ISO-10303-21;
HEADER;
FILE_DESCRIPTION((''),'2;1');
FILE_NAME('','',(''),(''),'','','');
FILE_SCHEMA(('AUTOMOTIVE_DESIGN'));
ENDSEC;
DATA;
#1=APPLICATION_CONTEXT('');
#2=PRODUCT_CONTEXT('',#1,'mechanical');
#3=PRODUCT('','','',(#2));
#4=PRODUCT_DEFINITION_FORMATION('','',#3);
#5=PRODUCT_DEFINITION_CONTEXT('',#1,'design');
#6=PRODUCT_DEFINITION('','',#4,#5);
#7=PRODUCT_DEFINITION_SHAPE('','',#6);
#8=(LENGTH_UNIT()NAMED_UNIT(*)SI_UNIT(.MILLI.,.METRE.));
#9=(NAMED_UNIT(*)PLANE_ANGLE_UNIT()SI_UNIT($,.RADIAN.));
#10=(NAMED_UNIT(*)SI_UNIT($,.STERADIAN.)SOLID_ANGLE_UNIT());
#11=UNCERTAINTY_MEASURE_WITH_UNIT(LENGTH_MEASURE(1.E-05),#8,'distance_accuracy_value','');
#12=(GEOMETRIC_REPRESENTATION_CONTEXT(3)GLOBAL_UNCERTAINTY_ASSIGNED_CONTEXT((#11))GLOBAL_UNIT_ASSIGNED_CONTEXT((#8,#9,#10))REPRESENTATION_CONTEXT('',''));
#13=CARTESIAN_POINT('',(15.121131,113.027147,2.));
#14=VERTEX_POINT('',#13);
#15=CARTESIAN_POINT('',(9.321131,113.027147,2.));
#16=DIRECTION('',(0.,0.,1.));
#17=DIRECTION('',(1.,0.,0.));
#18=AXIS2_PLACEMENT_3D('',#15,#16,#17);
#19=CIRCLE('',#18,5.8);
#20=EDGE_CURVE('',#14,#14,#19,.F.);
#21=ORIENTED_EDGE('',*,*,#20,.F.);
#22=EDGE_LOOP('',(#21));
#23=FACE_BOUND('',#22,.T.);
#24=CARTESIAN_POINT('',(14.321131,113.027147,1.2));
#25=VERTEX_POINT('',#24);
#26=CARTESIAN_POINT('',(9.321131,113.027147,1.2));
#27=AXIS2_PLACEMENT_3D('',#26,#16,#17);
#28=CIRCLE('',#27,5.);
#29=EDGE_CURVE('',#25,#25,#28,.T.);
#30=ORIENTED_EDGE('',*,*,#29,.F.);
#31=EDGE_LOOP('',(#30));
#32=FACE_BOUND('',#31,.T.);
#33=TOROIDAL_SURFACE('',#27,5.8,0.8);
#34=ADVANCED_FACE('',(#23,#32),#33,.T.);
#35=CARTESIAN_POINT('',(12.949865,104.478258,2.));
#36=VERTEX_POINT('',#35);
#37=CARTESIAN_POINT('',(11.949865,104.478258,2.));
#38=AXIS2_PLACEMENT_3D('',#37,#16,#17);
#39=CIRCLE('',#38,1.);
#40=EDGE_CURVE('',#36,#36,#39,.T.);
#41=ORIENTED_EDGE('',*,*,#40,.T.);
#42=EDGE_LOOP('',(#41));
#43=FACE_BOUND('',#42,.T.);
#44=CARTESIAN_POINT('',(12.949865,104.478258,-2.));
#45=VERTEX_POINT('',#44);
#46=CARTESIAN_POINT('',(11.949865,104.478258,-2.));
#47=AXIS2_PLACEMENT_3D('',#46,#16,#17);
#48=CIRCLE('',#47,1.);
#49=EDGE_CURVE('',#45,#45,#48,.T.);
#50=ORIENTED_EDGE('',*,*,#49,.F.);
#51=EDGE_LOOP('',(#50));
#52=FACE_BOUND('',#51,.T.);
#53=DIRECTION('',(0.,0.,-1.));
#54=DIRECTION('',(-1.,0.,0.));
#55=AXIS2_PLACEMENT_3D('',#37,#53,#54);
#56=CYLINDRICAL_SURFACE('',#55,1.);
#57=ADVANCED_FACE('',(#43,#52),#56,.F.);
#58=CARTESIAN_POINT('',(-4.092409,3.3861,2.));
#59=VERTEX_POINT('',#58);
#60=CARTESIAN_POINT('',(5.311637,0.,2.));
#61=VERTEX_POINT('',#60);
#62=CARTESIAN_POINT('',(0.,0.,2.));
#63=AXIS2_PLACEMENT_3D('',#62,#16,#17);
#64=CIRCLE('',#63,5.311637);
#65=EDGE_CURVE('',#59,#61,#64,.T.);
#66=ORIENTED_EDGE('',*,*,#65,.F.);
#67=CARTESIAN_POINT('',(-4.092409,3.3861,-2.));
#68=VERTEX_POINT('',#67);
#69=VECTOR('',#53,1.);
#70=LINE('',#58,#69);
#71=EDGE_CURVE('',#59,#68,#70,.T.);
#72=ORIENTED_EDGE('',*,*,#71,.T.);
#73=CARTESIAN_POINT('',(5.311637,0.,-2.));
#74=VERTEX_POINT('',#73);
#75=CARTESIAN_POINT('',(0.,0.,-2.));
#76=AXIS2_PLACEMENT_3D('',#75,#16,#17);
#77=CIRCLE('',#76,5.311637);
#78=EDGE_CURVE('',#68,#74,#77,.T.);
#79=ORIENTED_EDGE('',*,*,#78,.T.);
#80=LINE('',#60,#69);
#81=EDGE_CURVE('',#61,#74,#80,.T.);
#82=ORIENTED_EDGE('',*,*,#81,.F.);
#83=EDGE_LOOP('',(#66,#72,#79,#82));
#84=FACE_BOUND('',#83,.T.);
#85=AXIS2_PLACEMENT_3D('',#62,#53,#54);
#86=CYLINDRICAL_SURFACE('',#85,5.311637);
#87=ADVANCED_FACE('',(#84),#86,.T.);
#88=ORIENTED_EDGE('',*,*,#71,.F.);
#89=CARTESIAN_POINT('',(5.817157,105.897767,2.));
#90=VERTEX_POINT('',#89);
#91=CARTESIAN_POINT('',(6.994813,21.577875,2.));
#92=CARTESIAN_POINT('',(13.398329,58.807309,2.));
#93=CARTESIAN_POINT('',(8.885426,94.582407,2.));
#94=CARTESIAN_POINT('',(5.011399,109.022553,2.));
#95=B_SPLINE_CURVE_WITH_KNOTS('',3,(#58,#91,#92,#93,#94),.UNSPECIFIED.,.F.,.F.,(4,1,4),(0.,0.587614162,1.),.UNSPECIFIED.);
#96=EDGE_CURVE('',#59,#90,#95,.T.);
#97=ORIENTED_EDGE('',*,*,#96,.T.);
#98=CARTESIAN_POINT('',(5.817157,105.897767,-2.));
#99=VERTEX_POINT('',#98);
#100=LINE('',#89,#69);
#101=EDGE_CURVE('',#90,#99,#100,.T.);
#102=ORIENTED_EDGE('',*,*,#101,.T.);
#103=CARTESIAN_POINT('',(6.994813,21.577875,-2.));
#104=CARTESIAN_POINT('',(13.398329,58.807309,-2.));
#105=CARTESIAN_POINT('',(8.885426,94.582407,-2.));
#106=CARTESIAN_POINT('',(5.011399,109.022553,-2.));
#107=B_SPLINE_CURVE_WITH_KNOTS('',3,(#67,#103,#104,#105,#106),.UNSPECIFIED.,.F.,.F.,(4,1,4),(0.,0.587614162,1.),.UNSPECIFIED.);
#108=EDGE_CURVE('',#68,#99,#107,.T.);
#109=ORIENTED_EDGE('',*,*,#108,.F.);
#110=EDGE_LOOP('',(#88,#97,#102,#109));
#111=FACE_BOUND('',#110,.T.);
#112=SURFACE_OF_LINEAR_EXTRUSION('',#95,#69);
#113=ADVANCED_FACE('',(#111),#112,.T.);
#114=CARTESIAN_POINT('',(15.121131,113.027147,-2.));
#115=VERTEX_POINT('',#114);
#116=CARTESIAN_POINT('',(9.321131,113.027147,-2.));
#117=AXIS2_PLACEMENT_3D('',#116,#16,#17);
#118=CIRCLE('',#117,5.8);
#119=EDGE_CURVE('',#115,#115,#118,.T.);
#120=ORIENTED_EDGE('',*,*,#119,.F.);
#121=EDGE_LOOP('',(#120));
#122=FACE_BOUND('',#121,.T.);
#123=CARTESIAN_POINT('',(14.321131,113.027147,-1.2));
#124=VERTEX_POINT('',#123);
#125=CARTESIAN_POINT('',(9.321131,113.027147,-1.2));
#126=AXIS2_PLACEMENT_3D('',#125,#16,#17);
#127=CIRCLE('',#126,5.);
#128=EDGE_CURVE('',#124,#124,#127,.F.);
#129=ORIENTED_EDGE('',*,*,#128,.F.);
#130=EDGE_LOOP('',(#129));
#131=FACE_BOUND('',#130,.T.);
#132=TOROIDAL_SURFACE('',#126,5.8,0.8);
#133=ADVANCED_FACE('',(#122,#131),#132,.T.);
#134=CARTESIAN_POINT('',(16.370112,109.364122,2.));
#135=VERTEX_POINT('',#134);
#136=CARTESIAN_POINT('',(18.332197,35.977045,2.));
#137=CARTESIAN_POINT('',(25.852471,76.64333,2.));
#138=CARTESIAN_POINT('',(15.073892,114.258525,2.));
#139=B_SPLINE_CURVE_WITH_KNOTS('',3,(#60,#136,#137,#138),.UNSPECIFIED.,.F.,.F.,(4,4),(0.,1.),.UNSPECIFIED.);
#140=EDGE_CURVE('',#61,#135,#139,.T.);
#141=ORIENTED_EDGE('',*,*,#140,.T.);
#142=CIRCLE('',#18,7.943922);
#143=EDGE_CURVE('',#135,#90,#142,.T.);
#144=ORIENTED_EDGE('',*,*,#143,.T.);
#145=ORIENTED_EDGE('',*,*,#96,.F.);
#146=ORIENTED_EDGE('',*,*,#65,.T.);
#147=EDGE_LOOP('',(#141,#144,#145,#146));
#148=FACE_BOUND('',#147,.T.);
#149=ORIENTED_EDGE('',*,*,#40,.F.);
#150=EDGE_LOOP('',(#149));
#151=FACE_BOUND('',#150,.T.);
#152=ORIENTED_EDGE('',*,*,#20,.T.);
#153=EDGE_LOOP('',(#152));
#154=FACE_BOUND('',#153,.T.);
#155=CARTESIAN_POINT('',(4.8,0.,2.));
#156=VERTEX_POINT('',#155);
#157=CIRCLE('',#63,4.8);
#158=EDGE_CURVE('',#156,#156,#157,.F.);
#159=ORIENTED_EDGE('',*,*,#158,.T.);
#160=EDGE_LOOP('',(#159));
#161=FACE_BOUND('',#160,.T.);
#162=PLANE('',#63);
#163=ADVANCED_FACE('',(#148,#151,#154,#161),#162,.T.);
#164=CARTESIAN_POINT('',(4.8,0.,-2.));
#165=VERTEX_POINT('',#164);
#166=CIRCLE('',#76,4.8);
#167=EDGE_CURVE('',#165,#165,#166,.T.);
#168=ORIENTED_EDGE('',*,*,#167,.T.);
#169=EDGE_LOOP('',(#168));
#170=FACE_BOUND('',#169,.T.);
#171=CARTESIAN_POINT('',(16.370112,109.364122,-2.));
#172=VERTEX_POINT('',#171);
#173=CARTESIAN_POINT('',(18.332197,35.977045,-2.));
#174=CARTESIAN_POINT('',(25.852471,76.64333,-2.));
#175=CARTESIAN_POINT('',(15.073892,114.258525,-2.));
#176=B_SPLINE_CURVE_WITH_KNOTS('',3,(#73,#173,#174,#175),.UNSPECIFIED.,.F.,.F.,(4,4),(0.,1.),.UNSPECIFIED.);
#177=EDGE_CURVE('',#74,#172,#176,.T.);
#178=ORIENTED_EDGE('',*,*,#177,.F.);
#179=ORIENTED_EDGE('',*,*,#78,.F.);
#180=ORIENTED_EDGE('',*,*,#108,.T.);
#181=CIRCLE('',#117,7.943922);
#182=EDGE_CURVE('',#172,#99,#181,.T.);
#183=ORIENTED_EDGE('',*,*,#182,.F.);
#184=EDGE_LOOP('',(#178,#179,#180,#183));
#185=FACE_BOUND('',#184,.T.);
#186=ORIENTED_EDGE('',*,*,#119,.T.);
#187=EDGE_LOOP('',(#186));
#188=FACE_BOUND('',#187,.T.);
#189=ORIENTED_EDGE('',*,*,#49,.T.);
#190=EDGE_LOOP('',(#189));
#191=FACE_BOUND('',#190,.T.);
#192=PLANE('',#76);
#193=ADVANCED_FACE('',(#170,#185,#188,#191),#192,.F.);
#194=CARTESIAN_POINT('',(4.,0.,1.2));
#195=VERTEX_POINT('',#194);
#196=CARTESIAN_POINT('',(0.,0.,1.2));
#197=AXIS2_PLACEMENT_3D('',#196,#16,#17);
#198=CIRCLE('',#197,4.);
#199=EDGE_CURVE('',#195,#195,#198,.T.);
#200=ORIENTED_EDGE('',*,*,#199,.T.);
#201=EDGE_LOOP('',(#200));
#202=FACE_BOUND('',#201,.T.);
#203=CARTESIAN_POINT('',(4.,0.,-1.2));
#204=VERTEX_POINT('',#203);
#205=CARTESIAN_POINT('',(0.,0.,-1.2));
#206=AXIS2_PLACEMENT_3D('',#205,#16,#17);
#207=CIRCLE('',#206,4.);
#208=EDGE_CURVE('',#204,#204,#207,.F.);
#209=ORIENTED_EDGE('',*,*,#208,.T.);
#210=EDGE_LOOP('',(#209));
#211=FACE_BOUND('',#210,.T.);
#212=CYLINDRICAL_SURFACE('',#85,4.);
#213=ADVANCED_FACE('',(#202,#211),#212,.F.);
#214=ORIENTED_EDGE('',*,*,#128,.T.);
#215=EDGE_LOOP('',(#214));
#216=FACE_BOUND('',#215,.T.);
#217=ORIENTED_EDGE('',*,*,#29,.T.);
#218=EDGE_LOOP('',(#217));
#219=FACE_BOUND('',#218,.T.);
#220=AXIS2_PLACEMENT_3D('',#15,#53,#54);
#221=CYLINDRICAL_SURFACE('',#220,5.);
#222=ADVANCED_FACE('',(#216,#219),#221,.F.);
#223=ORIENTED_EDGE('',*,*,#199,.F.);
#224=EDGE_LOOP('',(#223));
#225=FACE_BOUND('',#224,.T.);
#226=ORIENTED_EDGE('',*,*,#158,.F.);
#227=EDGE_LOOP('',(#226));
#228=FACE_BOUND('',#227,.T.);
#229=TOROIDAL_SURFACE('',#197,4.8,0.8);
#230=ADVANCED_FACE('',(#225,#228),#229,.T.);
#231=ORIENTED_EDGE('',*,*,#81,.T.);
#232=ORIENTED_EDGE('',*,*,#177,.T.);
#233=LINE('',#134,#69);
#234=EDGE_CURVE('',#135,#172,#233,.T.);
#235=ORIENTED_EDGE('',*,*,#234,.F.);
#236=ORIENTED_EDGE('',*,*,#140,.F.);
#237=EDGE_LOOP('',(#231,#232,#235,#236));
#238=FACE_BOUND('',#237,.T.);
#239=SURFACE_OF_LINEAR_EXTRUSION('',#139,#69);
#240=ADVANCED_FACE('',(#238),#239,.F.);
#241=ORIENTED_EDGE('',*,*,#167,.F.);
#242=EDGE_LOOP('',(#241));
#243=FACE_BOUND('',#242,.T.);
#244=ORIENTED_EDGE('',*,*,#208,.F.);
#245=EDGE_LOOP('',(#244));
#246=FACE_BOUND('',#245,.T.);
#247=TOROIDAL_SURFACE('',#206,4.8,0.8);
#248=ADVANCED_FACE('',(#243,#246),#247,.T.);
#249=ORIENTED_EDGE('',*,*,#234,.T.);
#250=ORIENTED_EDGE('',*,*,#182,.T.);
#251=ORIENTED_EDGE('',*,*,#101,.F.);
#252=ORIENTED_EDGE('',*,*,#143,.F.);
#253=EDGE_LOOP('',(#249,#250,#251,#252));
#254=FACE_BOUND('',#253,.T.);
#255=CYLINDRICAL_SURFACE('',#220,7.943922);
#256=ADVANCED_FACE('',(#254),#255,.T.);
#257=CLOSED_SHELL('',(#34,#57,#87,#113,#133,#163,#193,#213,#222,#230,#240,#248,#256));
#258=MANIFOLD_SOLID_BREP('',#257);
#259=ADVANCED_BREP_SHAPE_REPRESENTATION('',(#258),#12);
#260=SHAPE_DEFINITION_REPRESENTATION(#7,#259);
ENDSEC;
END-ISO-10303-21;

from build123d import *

# Parameters (mm, degrees)
SKETCH1_R           = 4
SKETCH1_R_2         = 1
SKETCH1_R_3         = 5
BOSS_EXTRUDE1_DEPTH = 2
FILLET1_R           = 0.8


with BuildPart() as part:
    # Sketch1 → Boss-Extrude1 (new, symmetric)
    with BuildSketch(Plane.XY):
        with BuildLine():
            ThreePointArc((-4.09240869, 3.386100226), (-1.799457661, -4.997542972), (5.311636624, 0))
            add(Edge.make_bspline(
                [(5.311636624, 0), (17.769363539, 34.421881869), (25.192042954, 73.13636609), (16.37011227, 109.364122199)],
                knots=[0, 0, 0, 0, 0.956773453, 0.956773453, 0.956773453, 0.956773453], degree=3))
            ThreePointArc((16.37011227, 109.364122199), (6.842083231, 120.574345754), (5.817157068, 105.897766593))
            add(Edge.make_bspline(
                [(-4.09240869, 3.386100226), (6.994812741, 21.577875377), (13.208144478, 57.701592599), (9.143863643, 92.456079954), (5.817157068, 105.897766593)],
                knots=[0, 0, 0, 0, 0.587614162, 0.97029995, 0.97029995, 0.97029995, 0.97029995], degree=3))
        make_face()
        Circle(SKETCH1_R, mode=Mode.SUBTRACT)
        with Locations((11.949864601, 104.478258332)):
            Circle(SKETCH1_R_2, mode=Mode.SUBTRACT)
        with Locations((9.321130613, 113.027146637)):
            Circle(SKETCH1_R_3, mode=Mode.SUBTRACT)
    extrude(amount=BOSS_EXTRUDE1_DEPTH, both=True)

    # Fillet1
    fillet1_edges = [part.edges().sort_by_distance(p)[0] for p in [
        (-4, 0, -2),
        (-4, 0, 2),
        (4.321130613, 113.027146637, -2),
        (4.321130613, 113.027146637, 2),
    ]]
    fillet(fillet1_edges, radius=FILLET1_R)


solid = part.part
